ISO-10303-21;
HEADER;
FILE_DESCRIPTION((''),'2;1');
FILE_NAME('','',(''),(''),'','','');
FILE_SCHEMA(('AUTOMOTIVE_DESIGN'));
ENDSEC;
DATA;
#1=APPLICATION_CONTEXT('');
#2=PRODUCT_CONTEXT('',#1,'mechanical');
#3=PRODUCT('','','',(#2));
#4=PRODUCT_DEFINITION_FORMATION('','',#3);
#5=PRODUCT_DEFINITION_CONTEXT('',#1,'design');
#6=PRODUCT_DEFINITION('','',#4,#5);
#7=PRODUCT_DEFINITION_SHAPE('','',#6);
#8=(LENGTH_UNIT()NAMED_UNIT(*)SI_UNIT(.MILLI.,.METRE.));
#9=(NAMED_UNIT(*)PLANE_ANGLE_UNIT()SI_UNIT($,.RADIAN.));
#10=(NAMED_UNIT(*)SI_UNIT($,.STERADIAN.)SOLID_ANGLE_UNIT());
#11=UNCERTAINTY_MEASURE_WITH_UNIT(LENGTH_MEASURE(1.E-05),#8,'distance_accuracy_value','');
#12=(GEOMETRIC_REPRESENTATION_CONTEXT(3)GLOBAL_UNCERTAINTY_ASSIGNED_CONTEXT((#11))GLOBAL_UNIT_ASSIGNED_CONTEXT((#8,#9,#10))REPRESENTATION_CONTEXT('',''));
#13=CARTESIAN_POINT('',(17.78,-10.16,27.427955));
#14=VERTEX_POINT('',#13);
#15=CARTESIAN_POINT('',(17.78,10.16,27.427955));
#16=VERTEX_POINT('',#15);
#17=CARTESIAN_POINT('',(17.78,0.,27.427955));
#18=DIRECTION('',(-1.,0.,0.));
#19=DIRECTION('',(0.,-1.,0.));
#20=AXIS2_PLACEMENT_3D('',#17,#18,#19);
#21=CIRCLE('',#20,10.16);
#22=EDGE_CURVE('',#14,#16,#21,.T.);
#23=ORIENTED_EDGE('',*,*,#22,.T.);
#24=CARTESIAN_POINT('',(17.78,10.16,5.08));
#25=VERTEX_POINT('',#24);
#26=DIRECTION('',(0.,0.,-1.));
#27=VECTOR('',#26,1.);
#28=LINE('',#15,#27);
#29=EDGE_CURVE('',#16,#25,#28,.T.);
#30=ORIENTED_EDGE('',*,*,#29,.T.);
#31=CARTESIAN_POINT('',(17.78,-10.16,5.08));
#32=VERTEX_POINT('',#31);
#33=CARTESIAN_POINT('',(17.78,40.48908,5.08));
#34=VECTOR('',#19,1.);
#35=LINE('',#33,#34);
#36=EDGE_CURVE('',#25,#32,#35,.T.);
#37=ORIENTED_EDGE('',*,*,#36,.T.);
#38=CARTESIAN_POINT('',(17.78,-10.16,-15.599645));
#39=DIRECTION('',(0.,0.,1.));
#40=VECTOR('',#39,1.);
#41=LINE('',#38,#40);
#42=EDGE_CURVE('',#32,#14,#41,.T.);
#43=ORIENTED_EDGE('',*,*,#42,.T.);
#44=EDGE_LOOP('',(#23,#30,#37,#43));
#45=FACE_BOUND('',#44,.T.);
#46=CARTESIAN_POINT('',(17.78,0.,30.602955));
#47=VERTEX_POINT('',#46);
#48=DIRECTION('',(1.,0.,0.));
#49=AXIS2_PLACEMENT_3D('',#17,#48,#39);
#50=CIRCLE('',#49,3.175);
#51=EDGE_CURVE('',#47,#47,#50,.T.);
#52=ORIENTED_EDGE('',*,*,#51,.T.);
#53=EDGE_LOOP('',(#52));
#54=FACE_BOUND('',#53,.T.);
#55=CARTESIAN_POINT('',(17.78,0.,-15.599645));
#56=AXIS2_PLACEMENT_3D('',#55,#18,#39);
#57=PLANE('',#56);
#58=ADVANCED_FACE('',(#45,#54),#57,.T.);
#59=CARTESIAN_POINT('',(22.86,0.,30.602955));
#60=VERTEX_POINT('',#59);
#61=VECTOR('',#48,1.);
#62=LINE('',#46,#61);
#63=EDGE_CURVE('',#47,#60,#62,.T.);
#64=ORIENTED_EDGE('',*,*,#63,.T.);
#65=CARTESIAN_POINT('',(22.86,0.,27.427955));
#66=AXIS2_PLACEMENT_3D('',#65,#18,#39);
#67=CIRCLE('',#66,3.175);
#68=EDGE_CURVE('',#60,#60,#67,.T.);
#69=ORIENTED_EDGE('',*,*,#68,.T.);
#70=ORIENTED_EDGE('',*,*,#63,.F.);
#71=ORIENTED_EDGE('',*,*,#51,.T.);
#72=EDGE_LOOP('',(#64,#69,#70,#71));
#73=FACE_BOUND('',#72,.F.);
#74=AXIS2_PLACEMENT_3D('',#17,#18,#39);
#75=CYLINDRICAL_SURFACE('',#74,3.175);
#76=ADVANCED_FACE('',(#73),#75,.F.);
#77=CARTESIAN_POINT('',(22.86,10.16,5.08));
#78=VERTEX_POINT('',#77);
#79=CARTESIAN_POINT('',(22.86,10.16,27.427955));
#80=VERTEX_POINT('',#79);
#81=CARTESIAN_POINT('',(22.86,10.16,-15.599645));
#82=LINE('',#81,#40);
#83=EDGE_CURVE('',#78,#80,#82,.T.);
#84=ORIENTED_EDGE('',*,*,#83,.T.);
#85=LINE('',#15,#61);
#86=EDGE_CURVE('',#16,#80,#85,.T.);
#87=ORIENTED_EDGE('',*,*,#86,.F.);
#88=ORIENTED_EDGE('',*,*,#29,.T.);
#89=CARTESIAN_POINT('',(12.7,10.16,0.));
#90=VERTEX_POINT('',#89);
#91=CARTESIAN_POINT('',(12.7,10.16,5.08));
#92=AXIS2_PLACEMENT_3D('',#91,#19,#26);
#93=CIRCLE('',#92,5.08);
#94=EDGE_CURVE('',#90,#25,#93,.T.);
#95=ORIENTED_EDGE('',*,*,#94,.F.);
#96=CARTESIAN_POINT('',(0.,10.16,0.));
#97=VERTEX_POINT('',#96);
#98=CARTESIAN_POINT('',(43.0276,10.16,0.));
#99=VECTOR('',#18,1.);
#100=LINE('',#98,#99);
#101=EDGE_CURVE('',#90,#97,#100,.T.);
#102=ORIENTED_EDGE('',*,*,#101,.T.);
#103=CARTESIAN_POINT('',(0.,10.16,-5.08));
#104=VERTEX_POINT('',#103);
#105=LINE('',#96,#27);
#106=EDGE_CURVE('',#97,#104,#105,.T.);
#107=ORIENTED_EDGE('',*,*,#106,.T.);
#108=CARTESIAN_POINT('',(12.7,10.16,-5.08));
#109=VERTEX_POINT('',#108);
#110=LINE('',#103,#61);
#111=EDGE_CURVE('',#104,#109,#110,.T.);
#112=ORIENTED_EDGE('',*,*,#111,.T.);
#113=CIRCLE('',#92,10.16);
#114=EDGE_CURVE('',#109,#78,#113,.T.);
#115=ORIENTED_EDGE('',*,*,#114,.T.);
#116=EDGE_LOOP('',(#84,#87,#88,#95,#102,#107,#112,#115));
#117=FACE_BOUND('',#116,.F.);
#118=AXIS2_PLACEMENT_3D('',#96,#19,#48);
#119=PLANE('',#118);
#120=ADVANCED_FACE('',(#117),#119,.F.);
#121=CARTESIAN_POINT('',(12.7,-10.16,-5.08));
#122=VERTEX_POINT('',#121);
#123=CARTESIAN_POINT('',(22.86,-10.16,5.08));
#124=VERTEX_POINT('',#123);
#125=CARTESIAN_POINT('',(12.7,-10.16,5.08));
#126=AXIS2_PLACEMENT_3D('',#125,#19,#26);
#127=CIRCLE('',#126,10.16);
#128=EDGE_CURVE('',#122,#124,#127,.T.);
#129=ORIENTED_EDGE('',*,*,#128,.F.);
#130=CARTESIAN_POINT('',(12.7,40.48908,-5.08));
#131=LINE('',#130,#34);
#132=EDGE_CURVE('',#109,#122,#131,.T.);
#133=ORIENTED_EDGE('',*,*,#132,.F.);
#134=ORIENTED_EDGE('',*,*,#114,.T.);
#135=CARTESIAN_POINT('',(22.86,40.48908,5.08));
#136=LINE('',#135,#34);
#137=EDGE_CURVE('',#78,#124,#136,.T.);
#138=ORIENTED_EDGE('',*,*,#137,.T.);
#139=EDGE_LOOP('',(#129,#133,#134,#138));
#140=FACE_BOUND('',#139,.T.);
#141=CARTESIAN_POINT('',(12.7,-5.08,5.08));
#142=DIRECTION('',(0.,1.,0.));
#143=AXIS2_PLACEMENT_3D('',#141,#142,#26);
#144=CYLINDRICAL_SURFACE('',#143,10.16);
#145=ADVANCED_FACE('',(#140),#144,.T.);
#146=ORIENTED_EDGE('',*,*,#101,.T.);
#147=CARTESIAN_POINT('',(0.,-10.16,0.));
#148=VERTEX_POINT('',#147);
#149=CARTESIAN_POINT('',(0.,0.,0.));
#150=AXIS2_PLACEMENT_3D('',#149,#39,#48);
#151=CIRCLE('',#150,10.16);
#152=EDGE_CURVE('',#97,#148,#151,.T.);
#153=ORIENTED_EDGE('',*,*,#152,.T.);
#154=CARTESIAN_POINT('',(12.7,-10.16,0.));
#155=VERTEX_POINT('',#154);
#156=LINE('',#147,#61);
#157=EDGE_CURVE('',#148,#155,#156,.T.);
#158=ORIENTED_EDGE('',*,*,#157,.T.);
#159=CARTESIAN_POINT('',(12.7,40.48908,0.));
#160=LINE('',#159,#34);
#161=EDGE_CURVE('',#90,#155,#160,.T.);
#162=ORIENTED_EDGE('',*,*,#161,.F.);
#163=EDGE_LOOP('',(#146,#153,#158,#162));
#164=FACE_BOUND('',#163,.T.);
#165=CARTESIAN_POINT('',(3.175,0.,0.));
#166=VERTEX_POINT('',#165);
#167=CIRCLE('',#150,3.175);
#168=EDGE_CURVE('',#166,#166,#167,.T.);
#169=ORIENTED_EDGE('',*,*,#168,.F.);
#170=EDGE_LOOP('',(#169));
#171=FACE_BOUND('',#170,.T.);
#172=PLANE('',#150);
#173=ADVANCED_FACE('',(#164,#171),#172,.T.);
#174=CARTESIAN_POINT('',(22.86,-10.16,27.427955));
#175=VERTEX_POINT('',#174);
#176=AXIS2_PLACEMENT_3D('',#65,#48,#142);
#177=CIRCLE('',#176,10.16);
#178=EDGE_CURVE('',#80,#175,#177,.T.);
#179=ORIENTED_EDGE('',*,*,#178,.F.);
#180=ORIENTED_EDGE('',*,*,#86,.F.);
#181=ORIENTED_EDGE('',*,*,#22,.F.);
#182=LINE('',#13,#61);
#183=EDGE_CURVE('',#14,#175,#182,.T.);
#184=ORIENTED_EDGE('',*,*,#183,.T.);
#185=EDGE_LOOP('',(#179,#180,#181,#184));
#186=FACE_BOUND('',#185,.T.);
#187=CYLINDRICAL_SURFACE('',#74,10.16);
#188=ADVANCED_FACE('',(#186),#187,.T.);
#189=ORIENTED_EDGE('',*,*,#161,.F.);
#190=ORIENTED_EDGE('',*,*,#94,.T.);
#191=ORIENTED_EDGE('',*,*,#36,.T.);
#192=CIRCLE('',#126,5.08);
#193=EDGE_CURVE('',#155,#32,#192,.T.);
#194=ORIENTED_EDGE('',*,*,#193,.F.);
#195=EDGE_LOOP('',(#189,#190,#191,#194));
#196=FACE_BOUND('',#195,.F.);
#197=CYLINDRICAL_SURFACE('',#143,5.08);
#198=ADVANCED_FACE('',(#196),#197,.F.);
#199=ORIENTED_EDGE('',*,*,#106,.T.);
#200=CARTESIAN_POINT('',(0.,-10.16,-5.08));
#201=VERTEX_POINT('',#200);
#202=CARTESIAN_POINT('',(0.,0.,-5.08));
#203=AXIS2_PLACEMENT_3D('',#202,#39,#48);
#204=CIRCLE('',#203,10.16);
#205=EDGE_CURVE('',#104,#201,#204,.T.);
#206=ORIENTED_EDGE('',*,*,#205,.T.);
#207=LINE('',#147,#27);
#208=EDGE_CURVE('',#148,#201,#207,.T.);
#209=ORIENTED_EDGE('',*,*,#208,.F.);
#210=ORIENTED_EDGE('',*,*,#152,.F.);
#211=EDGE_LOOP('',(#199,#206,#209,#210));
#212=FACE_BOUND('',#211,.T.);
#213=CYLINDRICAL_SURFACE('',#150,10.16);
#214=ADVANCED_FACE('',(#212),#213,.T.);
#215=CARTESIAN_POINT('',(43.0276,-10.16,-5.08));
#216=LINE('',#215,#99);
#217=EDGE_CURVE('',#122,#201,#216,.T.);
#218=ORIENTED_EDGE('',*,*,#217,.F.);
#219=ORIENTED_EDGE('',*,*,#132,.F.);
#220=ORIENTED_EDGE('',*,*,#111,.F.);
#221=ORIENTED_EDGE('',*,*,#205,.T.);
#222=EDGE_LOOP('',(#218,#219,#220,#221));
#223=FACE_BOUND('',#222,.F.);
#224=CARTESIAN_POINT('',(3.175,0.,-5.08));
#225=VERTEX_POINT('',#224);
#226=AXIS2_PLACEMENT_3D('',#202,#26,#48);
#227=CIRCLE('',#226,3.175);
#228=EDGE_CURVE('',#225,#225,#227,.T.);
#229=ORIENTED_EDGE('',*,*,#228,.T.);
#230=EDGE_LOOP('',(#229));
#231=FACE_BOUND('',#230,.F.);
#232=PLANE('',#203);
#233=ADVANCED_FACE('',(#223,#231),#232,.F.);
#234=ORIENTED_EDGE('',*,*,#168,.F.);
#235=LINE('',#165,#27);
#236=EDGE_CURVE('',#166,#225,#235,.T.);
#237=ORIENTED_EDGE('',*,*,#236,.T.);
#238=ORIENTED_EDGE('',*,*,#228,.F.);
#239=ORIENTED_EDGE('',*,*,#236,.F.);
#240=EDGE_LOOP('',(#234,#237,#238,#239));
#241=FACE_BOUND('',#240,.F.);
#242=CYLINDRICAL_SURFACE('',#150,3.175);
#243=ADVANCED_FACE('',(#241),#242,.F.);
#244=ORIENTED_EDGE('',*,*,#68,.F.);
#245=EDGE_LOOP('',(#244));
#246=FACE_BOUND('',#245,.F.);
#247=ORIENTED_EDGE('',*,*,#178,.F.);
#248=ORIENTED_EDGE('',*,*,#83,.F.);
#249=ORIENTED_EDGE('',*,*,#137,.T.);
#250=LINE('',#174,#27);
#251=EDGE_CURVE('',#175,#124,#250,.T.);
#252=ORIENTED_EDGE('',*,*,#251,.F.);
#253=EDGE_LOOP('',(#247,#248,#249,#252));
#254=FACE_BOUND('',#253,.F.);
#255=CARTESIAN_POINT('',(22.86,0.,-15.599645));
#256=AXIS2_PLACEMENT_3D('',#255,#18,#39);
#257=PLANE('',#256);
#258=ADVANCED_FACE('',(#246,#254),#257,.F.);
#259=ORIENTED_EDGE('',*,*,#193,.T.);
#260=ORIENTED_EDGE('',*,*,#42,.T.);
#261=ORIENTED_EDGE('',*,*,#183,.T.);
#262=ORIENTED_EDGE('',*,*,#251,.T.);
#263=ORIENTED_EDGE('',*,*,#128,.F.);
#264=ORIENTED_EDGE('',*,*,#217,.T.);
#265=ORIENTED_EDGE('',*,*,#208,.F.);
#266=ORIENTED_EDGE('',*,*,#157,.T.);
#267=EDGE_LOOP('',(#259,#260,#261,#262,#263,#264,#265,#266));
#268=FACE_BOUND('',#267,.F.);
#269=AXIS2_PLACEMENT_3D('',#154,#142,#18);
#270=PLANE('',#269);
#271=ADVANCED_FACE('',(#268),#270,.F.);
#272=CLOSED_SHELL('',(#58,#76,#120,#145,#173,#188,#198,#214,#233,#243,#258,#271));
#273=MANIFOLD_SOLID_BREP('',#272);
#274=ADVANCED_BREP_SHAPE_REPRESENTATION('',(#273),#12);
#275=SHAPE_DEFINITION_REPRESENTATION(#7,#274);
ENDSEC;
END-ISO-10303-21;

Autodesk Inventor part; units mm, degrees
ref_plane "YZ Plane" through (0, 0, 0) normal (1, 0, 0) x (0, 1, 0)
ref_plane "XZ Plane" through (0, 0, 0) normal (0, 1, 0) x (-1, 0, 0)
ref_plane "XY Plane" through (0, 0, 0) normal (0, 0, 1) x (1, 0, 0)
sketch "Sketch1" plane through (0, 0, 0) normal (0, 0, 1) x (1, 0, 0)
  circle A0 centre (0, 0) radius 10.16
  line L0 (0, 10.16) -> (12.7, 10.16)
  line L1 (12.7, 10.16) -> (12.7, -10.16)
  line L2 (12.7, -10.16) -> (0, -10.16)
  line L3 (0, -10.16) -> (0, 10.16)
  circle A1 centre (0, 0) radius 3.175
  line L4 (12.7, 10.16) -> (27.7876, 10.16)
  line L5 (27.7876, 10.16) -> (27.7876, -10.16)
  line L6 (27.7876, -10.16) -> (12.7, -10.16)
  line L7 (12.7, -10.16) -> (12.7, 10.16)
  line L8 (27.7876, 10.16) -> (43.0276, 10.16)
  line L9 (43.0276, 10.16) -> (43.0276, -10.16)
  line L10 (43.0276, -10.16) -> (27.7876, -10.16)
  line L11 (27.7876, -10.16) -> (27.7876, 10.16)
  circle A2 centre (43.0276, 0) radius 10.16
  circle A3 centre (43.0276, 0) radius 3.175
  point P0 (0, -10.16)
  point P1 (12.7, -10.16)
  point P2 (43.0276, -10.16)
  dimension "d0" = 20.32
  dimension "d1" = 6.35
  dimension "d2" = 12.7
  dimension "d5" = 15.0876
  dimension "d6" = 15.24
extrude "Extrusion1" add sketch "Sketch1" against normal blind 5.08 contours A0 L3 A1 | A0 L0 L1 L2 | L3 A1 A0 | L4 L5 L6 L1 | L8 A2 L10 L5 | A2 L9 A3 | L9 A3 A2
sketch "Sketch2" plane through (0, 0, 0) normal (0, 0, 1) x (1, 0, 0)
  line L0 (12.7, -10.16) -> (12.7, 10.16) projected
  point P0 (0, 0)
bend part "Bend Part1" radius 5.08 angle 90 line through (12.7, -10.16, 0) along (0, 1, 0) centre toward (0, 0, 1) moving side (1, 0, 0) both sides no
sketch "Sketch3" plane through (22.86, 0, 27.428) normal (1, 0, 0) x (0, 0, -1)
  line L0 (32.508, -10.16) -> (32.508, 10.16) projected
  line L1 (17.4204, -10.16) -> (17.4204, 10.16)
  line L2 (0, 10.16) -> (22.348, 10.16) projected
  point P0 (27.428, 0)
  dimension "d10" = 15.0876
equation "\"d10\" = d5"
properties part number "ForearmActuatorBracketLeft"
